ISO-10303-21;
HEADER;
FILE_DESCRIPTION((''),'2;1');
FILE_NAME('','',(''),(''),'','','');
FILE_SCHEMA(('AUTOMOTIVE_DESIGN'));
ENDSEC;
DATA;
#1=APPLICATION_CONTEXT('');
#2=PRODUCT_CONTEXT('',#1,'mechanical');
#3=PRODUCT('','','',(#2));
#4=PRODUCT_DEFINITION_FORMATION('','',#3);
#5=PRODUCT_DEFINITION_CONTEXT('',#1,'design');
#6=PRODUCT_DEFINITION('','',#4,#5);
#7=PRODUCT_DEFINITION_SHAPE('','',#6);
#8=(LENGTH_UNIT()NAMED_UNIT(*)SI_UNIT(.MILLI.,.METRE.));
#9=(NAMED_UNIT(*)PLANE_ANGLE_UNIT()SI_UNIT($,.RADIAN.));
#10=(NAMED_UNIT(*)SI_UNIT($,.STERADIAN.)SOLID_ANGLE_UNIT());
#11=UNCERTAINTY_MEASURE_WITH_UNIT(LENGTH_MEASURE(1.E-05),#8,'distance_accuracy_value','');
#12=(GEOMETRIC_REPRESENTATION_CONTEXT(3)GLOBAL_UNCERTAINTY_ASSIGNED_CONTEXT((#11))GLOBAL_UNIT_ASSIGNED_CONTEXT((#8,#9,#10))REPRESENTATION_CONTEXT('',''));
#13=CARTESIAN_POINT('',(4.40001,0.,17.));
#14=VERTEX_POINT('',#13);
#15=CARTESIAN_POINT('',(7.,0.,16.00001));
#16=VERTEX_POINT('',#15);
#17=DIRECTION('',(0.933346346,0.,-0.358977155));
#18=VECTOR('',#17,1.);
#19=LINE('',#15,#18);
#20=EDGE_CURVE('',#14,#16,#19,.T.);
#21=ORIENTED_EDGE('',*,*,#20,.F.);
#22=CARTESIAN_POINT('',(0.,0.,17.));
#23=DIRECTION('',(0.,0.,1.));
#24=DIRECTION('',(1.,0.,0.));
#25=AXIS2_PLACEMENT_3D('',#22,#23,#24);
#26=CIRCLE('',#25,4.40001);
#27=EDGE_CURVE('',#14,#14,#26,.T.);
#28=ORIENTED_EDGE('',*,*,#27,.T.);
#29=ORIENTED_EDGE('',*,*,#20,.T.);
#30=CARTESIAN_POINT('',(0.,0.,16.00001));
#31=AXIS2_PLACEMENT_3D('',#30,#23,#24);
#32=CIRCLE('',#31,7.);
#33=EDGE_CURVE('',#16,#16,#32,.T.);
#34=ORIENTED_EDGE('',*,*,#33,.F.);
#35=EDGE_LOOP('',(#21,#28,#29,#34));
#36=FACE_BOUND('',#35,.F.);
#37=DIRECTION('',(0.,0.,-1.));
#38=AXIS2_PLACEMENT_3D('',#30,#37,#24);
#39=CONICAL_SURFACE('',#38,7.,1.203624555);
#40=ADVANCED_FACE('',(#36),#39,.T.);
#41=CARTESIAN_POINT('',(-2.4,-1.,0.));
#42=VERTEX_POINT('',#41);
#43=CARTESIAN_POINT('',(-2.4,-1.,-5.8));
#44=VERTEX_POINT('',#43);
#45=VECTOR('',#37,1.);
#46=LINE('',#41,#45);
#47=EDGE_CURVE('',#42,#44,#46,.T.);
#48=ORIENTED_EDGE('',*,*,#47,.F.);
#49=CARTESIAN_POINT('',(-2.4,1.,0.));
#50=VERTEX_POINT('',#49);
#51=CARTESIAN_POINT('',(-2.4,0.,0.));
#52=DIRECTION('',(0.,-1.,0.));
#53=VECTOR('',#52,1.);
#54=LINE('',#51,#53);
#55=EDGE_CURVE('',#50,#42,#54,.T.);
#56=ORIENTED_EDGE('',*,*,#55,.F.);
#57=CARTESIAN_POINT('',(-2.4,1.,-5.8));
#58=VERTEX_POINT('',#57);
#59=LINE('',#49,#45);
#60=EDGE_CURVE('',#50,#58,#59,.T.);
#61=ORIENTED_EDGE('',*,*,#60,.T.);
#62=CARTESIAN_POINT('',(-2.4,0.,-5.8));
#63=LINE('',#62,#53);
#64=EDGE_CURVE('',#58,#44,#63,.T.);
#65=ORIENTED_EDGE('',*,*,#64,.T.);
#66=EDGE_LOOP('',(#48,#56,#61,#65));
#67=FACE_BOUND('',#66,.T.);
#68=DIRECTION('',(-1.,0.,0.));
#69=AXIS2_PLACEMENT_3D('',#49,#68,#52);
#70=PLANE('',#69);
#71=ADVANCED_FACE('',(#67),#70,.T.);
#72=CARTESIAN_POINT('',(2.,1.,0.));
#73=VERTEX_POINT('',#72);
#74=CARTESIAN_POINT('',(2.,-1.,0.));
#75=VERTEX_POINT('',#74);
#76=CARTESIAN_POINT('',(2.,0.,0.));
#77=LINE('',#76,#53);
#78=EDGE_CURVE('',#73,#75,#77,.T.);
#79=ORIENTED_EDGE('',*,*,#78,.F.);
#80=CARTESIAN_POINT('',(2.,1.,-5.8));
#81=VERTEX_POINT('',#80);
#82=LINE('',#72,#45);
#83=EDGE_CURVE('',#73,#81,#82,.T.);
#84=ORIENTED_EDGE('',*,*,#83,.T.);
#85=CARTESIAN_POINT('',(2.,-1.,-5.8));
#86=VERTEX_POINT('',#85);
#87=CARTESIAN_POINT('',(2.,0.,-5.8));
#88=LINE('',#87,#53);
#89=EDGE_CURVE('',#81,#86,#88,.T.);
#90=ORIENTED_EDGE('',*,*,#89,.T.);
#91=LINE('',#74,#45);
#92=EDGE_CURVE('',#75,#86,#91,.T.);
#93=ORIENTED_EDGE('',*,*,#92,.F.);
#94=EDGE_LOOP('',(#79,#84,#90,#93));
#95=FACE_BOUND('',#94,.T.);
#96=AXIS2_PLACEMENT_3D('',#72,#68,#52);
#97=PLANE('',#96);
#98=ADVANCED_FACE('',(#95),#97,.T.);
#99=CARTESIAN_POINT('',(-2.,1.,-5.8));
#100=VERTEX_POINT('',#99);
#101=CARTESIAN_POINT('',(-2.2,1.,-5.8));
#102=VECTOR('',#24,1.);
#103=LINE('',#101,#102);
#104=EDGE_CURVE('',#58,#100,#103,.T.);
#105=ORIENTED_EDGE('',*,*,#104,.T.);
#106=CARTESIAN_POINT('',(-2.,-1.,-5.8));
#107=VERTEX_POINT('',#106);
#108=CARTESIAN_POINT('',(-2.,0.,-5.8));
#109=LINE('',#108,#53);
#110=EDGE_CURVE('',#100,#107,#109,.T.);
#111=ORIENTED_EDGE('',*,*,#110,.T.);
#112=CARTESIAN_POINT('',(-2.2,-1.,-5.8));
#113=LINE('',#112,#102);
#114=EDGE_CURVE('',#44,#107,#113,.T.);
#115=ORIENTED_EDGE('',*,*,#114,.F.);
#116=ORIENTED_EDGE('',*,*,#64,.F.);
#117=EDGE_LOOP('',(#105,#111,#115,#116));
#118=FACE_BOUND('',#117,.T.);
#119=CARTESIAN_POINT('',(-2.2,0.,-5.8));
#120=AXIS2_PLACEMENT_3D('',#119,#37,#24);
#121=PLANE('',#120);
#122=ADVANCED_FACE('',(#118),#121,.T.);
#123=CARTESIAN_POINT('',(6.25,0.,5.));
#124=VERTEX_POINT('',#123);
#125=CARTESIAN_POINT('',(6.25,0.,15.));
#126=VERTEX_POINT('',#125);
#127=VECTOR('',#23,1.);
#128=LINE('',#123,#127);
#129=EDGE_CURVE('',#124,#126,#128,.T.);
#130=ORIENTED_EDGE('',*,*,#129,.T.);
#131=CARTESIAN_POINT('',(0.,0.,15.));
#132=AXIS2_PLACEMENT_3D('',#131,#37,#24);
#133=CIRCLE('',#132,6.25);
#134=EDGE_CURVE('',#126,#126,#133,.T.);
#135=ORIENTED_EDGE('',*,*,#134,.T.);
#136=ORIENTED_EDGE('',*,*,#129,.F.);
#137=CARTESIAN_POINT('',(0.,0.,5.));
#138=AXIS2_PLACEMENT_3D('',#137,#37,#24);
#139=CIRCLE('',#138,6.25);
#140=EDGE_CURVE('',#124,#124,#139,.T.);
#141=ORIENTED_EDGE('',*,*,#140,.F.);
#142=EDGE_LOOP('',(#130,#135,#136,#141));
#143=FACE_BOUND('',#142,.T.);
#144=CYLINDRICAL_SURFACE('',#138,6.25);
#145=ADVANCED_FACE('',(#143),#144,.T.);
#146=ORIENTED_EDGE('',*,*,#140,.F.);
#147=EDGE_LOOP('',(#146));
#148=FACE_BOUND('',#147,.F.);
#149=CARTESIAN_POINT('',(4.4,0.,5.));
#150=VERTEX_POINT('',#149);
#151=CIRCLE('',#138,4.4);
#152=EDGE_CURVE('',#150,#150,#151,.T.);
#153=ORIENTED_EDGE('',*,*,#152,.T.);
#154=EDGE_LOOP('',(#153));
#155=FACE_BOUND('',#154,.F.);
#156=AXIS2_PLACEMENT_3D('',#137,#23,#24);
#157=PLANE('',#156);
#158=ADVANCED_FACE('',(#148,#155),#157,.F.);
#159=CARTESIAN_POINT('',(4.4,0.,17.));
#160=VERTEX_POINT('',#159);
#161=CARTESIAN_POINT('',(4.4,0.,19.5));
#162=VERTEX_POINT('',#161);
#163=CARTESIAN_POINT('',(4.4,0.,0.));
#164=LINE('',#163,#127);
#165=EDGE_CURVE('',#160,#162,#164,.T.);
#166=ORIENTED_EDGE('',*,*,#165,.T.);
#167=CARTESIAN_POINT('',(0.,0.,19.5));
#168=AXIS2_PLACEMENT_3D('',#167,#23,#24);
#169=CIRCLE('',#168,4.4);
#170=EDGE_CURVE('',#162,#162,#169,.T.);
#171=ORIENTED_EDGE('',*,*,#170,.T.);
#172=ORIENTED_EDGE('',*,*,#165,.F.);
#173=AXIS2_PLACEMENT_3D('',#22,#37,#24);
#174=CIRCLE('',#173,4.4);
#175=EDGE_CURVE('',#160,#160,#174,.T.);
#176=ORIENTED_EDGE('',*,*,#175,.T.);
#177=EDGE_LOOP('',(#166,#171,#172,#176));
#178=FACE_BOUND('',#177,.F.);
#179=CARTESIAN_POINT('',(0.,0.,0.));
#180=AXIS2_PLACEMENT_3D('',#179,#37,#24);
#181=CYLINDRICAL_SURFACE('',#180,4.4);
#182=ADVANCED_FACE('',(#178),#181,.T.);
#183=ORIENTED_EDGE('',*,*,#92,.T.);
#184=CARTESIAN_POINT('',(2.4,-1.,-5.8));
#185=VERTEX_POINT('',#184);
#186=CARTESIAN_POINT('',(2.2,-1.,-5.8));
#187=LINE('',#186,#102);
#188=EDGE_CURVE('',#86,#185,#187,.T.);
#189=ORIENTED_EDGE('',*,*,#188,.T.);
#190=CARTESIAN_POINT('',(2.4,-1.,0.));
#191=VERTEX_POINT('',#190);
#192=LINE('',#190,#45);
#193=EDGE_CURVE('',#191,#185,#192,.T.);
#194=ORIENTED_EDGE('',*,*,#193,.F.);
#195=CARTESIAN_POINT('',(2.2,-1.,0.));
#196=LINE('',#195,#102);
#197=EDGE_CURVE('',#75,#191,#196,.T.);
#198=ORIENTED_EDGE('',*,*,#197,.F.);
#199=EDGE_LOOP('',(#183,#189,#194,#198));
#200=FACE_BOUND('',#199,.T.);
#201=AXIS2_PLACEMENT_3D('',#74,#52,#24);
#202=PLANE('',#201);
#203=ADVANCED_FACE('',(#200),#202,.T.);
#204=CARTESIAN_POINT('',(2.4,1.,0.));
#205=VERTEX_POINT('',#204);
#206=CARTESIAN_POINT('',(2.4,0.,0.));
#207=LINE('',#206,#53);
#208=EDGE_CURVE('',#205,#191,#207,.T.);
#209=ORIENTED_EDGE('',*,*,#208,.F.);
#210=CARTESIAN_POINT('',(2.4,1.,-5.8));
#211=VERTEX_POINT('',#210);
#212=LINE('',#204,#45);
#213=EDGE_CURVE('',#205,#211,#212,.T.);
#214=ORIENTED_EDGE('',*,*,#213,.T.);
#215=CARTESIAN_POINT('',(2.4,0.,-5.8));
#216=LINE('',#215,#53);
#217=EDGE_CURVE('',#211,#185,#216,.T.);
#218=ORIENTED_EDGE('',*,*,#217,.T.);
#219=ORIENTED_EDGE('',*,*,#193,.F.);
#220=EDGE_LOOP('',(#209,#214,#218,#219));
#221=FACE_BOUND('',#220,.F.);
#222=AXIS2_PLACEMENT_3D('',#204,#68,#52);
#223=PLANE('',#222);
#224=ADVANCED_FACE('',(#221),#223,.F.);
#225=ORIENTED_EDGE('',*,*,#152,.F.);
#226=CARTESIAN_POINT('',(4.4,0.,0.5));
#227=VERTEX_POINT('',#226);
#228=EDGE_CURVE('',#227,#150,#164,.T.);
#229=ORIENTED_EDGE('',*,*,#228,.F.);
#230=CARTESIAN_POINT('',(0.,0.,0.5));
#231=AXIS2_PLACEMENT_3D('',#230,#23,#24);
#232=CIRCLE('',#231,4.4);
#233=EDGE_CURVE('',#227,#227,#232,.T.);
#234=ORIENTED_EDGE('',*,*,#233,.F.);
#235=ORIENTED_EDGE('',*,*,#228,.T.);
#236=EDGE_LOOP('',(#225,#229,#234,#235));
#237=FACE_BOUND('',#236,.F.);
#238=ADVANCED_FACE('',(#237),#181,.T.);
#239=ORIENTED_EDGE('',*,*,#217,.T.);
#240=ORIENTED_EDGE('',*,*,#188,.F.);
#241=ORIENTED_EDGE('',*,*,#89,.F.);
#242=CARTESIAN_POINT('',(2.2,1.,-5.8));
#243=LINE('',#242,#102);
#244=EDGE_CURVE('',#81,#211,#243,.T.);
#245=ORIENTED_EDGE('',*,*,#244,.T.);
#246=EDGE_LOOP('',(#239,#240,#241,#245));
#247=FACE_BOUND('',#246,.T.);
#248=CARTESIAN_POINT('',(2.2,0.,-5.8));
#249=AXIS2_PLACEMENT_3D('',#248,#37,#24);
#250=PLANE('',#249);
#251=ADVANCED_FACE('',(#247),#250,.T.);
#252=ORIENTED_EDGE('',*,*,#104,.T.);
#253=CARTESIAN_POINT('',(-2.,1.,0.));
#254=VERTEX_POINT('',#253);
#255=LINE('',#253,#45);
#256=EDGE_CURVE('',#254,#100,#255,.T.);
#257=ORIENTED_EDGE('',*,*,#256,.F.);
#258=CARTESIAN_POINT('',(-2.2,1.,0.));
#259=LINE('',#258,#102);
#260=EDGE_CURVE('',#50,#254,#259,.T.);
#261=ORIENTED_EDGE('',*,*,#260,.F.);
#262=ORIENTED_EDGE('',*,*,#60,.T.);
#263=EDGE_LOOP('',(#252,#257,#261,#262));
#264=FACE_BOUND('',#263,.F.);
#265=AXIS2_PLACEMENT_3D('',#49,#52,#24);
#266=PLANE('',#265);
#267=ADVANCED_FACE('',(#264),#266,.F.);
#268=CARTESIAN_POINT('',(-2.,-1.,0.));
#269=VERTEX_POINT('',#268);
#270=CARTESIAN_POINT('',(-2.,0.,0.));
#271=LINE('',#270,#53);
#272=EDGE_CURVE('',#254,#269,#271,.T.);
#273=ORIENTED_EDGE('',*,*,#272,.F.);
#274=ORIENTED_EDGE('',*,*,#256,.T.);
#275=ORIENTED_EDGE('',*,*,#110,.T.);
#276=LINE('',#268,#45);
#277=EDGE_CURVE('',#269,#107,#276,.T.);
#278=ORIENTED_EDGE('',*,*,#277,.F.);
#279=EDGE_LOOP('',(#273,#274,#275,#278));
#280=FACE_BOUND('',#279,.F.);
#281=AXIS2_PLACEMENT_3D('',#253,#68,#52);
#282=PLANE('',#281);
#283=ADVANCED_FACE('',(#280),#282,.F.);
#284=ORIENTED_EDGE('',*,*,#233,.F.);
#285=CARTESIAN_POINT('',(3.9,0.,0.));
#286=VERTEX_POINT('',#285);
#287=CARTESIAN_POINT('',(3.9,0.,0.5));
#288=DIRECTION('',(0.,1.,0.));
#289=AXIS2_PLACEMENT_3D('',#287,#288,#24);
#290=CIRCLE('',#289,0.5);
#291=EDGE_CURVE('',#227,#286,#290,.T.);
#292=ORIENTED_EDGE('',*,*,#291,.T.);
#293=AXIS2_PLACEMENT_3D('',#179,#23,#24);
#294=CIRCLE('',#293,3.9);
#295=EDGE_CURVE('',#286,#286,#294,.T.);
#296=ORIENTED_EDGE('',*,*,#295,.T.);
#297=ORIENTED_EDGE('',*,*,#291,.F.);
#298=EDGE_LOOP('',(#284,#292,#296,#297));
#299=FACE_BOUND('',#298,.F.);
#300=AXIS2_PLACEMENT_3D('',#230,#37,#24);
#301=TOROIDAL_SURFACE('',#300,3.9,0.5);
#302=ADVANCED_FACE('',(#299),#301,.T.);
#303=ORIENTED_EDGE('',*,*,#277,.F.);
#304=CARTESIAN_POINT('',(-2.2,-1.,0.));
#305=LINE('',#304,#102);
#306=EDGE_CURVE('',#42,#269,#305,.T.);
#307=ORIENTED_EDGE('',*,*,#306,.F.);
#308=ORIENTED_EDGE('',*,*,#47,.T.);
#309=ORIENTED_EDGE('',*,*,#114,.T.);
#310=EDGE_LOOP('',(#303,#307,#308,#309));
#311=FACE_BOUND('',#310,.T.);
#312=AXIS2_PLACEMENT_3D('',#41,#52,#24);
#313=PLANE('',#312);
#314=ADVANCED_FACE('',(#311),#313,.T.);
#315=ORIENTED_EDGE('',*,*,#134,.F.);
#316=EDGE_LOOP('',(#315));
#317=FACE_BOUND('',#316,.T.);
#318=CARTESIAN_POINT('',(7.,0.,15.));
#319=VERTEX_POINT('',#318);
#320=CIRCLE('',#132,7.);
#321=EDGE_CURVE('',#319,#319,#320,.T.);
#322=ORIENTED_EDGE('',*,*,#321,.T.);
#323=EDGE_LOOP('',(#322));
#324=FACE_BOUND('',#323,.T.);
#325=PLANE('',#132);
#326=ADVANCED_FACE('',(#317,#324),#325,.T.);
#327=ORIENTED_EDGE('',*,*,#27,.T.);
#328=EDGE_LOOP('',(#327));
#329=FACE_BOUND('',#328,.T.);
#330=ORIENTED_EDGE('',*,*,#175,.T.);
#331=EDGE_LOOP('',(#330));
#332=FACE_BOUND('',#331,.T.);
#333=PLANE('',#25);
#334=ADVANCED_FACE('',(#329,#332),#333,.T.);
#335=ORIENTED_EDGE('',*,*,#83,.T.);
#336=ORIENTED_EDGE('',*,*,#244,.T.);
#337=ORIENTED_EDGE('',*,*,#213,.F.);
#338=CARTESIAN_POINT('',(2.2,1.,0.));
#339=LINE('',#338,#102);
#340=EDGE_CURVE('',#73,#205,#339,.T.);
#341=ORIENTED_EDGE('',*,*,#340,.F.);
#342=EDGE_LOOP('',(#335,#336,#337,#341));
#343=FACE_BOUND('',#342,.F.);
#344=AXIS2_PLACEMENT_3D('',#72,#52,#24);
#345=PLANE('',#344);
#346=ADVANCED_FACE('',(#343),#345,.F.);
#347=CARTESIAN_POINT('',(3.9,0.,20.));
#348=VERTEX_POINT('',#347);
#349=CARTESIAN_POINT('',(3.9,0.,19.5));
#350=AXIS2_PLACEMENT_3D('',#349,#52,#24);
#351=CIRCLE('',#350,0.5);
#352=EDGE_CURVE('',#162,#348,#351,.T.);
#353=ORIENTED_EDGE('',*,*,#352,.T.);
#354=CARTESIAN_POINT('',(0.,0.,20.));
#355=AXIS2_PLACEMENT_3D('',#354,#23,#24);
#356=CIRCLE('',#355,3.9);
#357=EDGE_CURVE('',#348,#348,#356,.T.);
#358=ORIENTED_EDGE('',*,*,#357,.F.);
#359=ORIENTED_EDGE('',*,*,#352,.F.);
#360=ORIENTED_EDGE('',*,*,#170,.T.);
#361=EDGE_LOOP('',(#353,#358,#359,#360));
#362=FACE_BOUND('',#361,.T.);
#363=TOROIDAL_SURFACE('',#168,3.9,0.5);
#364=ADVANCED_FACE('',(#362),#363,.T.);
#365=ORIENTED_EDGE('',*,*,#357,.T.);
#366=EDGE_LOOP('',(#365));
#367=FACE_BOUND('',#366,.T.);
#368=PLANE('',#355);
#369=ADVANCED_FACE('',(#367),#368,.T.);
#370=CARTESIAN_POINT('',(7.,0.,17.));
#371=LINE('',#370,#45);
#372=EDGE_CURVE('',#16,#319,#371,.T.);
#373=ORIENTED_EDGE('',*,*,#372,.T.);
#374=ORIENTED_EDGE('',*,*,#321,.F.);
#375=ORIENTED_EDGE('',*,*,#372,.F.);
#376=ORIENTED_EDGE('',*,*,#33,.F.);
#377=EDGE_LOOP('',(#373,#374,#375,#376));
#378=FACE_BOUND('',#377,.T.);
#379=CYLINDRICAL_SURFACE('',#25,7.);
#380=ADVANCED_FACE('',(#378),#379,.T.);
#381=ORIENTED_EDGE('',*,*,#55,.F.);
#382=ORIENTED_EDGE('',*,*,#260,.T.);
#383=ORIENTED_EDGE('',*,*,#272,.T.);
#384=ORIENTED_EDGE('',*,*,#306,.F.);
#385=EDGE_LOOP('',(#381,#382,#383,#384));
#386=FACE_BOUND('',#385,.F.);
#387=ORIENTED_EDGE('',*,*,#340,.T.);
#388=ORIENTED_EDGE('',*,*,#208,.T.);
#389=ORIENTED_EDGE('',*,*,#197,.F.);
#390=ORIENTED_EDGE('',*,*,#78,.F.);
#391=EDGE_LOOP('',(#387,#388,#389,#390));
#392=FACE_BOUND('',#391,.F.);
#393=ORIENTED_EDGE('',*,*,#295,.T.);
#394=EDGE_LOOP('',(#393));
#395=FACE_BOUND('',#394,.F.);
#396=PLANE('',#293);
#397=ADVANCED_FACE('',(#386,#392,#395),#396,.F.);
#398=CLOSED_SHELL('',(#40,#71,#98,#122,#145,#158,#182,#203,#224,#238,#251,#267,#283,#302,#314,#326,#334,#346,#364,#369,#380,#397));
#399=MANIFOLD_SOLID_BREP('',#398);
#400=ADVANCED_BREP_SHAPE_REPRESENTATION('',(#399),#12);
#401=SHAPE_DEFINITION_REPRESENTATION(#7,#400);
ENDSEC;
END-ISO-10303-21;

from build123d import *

# Parameters (mm, degrees)
F0_R      = 4.4
F1_DEPTH  = 20
F2_R      = 0.5
F4_R      = 7
F5_DEPTH  = 12
F6_W      = 0.4
F6_H      = 2
F7_DEPTH  = 5.8
F8_SIZE2  = 0.99999
F8_SIZE   = 2.59999
F9_R      = 7
F9_R_2    = 6.25
F10_DEPTH = 10


# Not quite as in the source:
# - a fillet or chamfer is up to 0.001 mm smaller than in the source, because OpenCascade refuses the exact size


with BuildPart() as f1:
    # F0 (on Top) → F1 (new body)
    with BuildSketch(Plane.XY):
        Circle(F0_R)
    extrude(amount=F1_DEPTH)

    # F2
    f2_edges = [f1.edges().sort_by_distance(p)[0] for p in [
        (-4.4, 0, 20),
        (-4.4, 0, 0),
    ]]
    fillet(f2_edges, radius=F2_R)

    # F4 (on offset) → F5 (join)
    with BuildSketch(Plane.XY.offset(17)):
        Circle(F4_R)
    extrude(amount=-F5_DEPTH)

    # F6 (on face) → F7 (join)
    with BuildSketch(Plane(origin=(0, 0, 0), x_dir=(1, 0, 0), z_dir=(0, 0, -1))):
        with Locations((-2.2, 0)):
            Rectangle(F6_W, F6_H)
        with Locations((2.2, 0)):
            Rectangle(F6_W, F6_H)
    extrude(amount=F7_DEPTH)

    # F8 (size 2.6 and 1 in the source; OpenCascade refuses exactly that, so slightly less here)
    f8_edges = [f1.edges().sort_by_distance(p)[0] for p in [
        (-7, 0, 17),
    ]]
    f8_side = f1.faces().sort_by_distance((-6.80201, 0, 17))[0]
    chamfer(f8_edges, length=F8_SIZE, length2=F8_SIZE2, reference=f8_side)

    # F9 (on face) → F10 (cut)
    with BuildSketch(Plane(origin=(0, 0, 5), x_dir=(1, 0, 0), z_dir=(0, 0, -1))):
        Circle(F9_R)
        Circle(F9_R_2, mode=Mode.SUBTRACT)
    extrude(amount=-F10_DEPTH, mode=Mode.SUBTRACT)


solid = f1.part
